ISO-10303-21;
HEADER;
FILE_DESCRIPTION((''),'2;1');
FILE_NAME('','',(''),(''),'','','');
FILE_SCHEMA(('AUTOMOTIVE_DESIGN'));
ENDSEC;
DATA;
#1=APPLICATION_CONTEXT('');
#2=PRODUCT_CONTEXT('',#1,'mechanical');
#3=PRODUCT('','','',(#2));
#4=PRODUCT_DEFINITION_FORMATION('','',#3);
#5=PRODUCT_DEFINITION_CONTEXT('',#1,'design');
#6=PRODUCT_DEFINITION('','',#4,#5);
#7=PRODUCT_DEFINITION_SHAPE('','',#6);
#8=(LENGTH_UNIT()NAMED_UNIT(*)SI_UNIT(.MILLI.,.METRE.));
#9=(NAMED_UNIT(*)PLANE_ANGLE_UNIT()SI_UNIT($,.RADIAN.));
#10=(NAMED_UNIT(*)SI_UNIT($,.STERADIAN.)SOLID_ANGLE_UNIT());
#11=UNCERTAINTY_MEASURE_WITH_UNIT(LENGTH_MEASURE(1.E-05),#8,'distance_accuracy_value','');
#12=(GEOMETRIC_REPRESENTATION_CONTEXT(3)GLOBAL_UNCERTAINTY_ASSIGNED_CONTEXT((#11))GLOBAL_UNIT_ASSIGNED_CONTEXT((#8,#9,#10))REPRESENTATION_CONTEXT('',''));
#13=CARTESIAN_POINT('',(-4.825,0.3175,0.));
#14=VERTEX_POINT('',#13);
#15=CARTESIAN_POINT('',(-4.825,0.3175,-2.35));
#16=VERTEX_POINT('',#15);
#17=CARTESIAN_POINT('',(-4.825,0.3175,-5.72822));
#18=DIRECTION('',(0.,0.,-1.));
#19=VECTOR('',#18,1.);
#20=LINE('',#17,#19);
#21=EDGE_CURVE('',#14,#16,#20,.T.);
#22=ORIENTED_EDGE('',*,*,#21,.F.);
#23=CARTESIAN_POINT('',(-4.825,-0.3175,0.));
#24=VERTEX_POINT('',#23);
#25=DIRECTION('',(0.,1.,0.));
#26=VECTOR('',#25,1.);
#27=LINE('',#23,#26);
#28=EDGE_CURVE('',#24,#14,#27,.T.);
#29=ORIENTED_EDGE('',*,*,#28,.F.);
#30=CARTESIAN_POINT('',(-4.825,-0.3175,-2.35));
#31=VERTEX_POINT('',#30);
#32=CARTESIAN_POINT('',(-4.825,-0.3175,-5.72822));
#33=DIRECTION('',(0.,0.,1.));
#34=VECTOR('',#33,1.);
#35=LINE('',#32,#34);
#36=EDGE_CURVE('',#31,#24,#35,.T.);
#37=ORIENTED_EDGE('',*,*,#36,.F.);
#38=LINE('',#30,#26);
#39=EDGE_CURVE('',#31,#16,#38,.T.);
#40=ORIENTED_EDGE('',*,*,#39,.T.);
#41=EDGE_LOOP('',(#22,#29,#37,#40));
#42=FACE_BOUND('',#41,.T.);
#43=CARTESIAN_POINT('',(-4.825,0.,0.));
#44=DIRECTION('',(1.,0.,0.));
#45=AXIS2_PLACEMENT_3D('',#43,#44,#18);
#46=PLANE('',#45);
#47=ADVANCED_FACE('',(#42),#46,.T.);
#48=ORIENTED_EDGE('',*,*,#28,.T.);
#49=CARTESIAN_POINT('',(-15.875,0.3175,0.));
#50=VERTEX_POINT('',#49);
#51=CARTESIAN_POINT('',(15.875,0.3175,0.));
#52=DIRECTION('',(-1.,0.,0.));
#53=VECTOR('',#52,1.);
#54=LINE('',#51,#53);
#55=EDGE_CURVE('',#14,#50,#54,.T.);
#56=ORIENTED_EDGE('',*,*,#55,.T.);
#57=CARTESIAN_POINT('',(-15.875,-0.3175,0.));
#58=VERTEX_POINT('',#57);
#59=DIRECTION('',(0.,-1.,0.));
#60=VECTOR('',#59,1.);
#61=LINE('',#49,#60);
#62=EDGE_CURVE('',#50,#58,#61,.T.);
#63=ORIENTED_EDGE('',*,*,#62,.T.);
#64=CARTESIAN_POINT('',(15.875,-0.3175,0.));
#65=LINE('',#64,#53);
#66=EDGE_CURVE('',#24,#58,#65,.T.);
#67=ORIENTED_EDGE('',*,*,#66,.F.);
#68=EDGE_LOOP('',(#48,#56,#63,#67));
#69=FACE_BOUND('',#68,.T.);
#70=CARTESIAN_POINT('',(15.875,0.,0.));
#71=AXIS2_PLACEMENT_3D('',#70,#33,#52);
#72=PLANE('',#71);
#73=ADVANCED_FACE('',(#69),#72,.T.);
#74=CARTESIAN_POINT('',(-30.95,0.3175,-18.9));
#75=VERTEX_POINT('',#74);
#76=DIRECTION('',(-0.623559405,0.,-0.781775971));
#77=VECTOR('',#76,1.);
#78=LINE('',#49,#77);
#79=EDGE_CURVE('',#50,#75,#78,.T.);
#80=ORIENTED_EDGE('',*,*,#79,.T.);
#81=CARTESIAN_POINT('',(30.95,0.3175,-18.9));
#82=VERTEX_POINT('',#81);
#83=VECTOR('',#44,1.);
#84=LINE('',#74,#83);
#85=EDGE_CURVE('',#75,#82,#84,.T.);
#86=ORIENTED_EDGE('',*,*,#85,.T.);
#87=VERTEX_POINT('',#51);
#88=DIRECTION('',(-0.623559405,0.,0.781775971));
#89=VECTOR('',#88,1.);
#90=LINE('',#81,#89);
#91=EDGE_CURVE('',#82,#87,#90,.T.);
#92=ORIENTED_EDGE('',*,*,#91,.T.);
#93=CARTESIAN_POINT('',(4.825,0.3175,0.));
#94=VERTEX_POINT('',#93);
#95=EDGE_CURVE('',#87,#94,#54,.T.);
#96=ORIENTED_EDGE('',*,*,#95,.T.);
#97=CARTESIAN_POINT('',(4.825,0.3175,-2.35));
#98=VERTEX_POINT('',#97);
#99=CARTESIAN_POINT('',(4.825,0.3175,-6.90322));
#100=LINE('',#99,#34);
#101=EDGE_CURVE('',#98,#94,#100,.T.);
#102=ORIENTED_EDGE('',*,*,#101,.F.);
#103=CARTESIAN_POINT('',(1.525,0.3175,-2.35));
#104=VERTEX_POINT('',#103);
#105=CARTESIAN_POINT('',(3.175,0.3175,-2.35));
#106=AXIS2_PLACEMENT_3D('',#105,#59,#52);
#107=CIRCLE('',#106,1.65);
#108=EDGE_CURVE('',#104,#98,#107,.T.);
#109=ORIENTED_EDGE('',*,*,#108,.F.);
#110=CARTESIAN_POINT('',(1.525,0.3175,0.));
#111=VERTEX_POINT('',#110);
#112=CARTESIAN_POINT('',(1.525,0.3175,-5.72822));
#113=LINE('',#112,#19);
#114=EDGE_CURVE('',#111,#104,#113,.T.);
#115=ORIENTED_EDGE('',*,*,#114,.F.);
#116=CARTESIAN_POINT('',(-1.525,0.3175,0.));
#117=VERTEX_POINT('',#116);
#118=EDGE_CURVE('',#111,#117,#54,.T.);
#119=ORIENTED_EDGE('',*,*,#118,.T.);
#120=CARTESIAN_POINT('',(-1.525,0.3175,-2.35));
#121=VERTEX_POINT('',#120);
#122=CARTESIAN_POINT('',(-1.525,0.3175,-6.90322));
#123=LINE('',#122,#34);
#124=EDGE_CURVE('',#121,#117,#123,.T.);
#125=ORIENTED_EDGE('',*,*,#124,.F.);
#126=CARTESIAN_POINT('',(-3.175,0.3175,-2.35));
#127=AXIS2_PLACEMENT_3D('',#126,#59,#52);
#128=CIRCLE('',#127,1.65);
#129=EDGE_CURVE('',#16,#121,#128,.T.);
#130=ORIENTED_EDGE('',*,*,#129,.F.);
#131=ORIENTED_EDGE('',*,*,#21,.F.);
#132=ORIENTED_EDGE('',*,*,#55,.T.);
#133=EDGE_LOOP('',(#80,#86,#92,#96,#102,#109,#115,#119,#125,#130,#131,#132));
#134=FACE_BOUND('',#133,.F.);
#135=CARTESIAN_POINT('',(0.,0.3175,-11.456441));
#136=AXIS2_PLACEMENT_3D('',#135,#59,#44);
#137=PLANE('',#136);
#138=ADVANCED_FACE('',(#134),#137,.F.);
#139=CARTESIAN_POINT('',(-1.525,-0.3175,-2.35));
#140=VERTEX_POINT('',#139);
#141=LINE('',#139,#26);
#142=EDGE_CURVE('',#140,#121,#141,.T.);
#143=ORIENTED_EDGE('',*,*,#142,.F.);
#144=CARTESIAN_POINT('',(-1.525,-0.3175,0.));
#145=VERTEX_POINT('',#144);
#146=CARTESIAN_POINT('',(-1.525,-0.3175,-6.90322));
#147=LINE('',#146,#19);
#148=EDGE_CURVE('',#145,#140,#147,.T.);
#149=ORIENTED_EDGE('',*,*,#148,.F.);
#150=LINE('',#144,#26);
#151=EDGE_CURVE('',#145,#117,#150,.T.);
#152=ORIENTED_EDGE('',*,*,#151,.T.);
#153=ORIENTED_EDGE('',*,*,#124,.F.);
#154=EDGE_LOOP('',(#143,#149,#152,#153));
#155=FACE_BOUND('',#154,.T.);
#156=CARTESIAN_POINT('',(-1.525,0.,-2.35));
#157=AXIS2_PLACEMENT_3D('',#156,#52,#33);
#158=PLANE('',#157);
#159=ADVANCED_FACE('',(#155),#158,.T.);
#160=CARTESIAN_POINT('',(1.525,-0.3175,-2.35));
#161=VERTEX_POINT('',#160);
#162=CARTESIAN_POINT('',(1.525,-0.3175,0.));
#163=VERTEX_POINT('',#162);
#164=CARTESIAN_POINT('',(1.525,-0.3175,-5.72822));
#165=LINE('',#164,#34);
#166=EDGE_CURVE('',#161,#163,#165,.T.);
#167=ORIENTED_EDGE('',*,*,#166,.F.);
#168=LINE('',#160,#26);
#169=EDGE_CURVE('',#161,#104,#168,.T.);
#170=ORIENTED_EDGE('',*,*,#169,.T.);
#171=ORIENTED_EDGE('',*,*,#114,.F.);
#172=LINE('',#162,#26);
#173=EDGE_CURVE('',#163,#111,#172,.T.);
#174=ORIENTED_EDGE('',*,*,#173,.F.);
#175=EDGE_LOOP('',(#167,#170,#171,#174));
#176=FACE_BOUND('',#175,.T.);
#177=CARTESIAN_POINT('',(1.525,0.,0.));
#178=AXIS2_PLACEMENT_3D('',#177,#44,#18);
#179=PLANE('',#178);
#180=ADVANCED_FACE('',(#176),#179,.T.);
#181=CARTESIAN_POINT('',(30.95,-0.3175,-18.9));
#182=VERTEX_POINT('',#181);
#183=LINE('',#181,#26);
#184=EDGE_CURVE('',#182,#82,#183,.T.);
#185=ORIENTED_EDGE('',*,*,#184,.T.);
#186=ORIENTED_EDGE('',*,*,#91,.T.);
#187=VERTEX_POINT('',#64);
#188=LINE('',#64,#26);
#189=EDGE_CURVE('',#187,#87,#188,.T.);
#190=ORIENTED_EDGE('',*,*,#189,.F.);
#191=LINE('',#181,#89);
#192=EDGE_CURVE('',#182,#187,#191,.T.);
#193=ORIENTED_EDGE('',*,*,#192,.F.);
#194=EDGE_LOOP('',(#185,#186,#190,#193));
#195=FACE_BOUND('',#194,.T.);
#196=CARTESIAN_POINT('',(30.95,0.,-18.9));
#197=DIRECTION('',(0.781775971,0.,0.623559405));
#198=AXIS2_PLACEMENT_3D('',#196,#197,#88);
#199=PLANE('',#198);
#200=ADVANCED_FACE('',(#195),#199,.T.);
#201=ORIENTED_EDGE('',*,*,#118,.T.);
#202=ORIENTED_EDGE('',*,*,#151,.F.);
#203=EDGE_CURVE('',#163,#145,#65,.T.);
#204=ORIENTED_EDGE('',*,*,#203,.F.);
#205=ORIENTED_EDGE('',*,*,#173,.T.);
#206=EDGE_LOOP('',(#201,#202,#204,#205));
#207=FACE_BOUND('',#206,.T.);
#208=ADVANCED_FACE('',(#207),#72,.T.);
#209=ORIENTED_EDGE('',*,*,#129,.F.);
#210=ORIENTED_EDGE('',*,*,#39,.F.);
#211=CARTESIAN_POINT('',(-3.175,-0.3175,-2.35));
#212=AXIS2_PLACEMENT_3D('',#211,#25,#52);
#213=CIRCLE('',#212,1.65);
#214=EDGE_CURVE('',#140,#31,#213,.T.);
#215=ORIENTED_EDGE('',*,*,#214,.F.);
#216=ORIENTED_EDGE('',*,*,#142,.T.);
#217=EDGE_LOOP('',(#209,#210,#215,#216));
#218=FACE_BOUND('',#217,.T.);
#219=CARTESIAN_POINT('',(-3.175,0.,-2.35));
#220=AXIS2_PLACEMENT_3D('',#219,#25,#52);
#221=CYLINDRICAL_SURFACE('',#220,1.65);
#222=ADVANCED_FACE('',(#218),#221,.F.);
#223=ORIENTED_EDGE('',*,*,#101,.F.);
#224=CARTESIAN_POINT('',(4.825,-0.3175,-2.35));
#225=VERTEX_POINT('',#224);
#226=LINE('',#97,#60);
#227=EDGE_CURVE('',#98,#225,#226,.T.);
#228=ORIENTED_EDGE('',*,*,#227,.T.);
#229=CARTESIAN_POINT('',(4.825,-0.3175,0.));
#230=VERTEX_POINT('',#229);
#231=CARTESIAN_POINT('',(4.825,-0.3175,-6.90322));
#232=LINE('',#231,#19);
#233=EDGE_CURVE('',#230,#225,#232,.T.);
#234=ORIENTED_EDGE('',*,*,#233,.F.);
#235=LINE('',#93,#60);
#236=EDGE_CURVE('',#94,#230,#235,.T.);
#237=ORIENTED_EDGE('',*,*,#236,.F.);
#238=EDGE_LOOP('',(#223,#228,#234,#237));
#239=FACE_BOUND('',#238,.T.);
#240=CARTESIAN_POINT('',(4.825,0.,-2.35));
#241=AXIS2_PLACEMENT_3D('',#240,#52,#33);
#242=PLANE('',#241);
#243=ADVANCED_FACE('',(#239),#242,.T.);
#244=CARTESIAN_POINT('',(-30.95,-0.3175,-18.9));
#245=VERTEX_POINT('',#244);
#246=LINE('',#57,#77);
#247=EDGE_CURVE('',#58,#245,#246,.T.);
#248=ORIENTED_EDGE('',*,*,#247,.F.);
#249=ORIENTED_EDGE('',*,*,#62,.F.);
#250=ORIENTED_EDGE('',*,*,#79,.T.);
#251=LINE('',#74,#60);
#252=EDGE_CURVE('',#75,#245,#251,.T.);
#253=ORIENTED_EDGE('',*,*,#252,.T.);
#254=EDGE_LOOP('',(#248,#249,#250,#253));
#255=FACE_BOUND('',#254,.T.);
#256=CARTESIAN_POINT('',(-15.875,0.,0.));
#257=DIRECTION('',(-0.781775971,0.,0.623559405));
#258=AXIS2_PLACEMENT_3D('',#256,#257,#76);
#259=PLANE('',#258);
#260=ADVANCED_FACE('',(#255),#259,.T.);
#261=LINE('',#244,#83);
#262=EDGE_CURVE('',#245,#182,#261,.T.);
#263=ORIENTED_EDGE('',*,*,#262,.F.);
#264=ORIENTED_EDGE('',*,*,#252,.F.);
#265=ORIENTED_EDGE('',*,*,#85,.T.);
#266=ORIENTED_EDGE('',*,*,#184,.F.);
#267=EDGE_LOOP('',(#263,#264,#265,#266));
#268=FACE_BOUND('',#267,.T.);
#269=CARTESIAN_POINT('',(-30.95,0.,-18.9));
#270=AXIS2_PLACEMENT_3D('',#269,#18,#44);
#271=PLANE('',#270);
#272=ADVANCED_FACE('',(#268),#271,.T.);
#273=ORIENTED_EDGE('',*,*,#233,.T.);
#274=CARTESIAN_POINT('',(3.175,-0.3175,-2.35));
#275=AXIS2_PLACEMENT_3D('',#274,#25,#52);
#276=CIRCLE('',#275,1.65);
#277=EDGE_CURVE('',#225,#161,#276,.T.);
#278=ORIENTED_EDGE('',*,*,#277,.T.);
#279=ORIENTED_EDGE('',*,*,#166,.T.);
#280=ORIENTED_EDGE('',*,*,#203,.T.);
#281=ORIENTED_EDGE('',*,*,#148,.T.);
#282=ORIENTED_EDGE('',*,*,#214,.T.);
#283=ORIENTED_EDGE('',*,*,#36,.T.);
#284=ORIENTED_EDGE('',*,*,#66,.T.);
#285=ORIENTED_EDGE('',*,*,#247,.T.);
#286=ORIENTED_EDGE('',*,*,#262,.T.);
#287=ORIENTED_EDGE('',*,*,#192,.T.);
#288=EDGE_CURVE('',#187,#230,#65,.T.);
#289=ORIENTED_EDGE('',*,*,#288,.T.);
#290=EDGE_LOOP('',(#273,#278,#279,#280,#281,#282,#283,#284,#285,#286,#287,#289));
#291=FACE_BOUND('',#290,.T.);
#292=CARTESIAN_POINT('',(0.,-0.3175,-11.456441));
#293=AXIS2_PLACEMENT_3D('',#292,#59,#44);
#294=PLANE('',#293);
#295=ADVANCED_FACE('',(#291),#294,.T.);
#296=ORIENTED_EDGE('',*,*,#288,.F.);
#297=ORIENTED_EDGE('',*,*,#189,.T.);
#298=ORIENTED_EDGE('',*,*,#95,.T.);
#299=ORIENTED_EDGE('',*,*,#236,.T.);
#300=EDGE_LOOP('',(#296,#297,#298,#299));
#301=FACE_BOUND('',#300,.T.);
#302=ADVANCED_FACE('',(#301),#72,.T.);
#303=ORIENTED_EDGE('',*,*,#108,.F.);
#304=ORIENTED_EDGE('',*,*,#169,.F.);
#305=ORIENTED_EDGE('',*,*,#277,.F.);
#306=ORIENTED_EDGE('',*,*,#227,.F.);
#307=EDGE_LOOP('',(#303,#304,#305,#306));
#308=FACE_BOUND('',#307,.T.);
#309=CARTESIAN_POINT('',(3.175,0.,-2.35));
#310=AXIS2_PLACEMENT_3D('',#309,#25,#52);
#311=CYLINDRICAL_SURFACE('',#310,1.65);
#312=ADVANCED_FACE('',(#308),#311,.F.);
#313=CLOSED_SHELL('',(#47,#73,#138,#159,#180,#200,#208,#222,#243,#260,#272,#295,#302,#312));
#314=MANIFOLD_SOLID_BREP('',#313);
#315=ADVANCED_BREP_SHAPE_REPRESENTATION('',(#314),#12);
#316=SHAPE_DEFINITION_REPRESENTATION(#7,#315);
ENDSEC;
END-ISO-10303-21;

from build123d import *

# Parameters (mm, degrees)
F1_DEPTH      = 0.3175
F3_DEPTH      = 0.3185
F3_DEPTH_BACK = 0.3185


with BuildPart() as f1:
    # F0 (on Front) → F1 (new body, symmetric)
    with BuildSketch(Plane.XZ):
        Polygon((15.875, 0), (-15.875, 0), (-30.95, -18.9), (30.95, -18.9), align=None)
    extrude(amount=F1_DEPTH, both=True)

    # F2 (on Front) → F3 (cut, two sides)
    with BuildSketch(Plane.XZ) as f3_sk:
        with BuildLine():
            Line((-1.525, 0), (-4.825, 0))
            Line((-4.825, 0), (-4.825, -2.35))
            ThreePointArc((-4.825, -2.35), (-3.175, -4), (-1.525, -2.35))
            Line((-1.525, -2.35), (-1.525, 0))
        make_face()
        with BuildLine():
            Line((4.825, -2.35), (4.825, 0))
            Line((4.825, 0), (1.525, 0))
            Line((1.525, 0), (1.525, -2.35))
            ThreePointArc((1.525, -2.35), (3.175, -4), (4.825, -2.35))
        make_face()
    extrude(amount=-F3_DEPTH, mode=Mode.SUBTRACT)
    extrude(f3_sk.sketch, amount=F3_DEPTH_BACK, mode=Mode.SUBTRACT)


solid = f1.part
